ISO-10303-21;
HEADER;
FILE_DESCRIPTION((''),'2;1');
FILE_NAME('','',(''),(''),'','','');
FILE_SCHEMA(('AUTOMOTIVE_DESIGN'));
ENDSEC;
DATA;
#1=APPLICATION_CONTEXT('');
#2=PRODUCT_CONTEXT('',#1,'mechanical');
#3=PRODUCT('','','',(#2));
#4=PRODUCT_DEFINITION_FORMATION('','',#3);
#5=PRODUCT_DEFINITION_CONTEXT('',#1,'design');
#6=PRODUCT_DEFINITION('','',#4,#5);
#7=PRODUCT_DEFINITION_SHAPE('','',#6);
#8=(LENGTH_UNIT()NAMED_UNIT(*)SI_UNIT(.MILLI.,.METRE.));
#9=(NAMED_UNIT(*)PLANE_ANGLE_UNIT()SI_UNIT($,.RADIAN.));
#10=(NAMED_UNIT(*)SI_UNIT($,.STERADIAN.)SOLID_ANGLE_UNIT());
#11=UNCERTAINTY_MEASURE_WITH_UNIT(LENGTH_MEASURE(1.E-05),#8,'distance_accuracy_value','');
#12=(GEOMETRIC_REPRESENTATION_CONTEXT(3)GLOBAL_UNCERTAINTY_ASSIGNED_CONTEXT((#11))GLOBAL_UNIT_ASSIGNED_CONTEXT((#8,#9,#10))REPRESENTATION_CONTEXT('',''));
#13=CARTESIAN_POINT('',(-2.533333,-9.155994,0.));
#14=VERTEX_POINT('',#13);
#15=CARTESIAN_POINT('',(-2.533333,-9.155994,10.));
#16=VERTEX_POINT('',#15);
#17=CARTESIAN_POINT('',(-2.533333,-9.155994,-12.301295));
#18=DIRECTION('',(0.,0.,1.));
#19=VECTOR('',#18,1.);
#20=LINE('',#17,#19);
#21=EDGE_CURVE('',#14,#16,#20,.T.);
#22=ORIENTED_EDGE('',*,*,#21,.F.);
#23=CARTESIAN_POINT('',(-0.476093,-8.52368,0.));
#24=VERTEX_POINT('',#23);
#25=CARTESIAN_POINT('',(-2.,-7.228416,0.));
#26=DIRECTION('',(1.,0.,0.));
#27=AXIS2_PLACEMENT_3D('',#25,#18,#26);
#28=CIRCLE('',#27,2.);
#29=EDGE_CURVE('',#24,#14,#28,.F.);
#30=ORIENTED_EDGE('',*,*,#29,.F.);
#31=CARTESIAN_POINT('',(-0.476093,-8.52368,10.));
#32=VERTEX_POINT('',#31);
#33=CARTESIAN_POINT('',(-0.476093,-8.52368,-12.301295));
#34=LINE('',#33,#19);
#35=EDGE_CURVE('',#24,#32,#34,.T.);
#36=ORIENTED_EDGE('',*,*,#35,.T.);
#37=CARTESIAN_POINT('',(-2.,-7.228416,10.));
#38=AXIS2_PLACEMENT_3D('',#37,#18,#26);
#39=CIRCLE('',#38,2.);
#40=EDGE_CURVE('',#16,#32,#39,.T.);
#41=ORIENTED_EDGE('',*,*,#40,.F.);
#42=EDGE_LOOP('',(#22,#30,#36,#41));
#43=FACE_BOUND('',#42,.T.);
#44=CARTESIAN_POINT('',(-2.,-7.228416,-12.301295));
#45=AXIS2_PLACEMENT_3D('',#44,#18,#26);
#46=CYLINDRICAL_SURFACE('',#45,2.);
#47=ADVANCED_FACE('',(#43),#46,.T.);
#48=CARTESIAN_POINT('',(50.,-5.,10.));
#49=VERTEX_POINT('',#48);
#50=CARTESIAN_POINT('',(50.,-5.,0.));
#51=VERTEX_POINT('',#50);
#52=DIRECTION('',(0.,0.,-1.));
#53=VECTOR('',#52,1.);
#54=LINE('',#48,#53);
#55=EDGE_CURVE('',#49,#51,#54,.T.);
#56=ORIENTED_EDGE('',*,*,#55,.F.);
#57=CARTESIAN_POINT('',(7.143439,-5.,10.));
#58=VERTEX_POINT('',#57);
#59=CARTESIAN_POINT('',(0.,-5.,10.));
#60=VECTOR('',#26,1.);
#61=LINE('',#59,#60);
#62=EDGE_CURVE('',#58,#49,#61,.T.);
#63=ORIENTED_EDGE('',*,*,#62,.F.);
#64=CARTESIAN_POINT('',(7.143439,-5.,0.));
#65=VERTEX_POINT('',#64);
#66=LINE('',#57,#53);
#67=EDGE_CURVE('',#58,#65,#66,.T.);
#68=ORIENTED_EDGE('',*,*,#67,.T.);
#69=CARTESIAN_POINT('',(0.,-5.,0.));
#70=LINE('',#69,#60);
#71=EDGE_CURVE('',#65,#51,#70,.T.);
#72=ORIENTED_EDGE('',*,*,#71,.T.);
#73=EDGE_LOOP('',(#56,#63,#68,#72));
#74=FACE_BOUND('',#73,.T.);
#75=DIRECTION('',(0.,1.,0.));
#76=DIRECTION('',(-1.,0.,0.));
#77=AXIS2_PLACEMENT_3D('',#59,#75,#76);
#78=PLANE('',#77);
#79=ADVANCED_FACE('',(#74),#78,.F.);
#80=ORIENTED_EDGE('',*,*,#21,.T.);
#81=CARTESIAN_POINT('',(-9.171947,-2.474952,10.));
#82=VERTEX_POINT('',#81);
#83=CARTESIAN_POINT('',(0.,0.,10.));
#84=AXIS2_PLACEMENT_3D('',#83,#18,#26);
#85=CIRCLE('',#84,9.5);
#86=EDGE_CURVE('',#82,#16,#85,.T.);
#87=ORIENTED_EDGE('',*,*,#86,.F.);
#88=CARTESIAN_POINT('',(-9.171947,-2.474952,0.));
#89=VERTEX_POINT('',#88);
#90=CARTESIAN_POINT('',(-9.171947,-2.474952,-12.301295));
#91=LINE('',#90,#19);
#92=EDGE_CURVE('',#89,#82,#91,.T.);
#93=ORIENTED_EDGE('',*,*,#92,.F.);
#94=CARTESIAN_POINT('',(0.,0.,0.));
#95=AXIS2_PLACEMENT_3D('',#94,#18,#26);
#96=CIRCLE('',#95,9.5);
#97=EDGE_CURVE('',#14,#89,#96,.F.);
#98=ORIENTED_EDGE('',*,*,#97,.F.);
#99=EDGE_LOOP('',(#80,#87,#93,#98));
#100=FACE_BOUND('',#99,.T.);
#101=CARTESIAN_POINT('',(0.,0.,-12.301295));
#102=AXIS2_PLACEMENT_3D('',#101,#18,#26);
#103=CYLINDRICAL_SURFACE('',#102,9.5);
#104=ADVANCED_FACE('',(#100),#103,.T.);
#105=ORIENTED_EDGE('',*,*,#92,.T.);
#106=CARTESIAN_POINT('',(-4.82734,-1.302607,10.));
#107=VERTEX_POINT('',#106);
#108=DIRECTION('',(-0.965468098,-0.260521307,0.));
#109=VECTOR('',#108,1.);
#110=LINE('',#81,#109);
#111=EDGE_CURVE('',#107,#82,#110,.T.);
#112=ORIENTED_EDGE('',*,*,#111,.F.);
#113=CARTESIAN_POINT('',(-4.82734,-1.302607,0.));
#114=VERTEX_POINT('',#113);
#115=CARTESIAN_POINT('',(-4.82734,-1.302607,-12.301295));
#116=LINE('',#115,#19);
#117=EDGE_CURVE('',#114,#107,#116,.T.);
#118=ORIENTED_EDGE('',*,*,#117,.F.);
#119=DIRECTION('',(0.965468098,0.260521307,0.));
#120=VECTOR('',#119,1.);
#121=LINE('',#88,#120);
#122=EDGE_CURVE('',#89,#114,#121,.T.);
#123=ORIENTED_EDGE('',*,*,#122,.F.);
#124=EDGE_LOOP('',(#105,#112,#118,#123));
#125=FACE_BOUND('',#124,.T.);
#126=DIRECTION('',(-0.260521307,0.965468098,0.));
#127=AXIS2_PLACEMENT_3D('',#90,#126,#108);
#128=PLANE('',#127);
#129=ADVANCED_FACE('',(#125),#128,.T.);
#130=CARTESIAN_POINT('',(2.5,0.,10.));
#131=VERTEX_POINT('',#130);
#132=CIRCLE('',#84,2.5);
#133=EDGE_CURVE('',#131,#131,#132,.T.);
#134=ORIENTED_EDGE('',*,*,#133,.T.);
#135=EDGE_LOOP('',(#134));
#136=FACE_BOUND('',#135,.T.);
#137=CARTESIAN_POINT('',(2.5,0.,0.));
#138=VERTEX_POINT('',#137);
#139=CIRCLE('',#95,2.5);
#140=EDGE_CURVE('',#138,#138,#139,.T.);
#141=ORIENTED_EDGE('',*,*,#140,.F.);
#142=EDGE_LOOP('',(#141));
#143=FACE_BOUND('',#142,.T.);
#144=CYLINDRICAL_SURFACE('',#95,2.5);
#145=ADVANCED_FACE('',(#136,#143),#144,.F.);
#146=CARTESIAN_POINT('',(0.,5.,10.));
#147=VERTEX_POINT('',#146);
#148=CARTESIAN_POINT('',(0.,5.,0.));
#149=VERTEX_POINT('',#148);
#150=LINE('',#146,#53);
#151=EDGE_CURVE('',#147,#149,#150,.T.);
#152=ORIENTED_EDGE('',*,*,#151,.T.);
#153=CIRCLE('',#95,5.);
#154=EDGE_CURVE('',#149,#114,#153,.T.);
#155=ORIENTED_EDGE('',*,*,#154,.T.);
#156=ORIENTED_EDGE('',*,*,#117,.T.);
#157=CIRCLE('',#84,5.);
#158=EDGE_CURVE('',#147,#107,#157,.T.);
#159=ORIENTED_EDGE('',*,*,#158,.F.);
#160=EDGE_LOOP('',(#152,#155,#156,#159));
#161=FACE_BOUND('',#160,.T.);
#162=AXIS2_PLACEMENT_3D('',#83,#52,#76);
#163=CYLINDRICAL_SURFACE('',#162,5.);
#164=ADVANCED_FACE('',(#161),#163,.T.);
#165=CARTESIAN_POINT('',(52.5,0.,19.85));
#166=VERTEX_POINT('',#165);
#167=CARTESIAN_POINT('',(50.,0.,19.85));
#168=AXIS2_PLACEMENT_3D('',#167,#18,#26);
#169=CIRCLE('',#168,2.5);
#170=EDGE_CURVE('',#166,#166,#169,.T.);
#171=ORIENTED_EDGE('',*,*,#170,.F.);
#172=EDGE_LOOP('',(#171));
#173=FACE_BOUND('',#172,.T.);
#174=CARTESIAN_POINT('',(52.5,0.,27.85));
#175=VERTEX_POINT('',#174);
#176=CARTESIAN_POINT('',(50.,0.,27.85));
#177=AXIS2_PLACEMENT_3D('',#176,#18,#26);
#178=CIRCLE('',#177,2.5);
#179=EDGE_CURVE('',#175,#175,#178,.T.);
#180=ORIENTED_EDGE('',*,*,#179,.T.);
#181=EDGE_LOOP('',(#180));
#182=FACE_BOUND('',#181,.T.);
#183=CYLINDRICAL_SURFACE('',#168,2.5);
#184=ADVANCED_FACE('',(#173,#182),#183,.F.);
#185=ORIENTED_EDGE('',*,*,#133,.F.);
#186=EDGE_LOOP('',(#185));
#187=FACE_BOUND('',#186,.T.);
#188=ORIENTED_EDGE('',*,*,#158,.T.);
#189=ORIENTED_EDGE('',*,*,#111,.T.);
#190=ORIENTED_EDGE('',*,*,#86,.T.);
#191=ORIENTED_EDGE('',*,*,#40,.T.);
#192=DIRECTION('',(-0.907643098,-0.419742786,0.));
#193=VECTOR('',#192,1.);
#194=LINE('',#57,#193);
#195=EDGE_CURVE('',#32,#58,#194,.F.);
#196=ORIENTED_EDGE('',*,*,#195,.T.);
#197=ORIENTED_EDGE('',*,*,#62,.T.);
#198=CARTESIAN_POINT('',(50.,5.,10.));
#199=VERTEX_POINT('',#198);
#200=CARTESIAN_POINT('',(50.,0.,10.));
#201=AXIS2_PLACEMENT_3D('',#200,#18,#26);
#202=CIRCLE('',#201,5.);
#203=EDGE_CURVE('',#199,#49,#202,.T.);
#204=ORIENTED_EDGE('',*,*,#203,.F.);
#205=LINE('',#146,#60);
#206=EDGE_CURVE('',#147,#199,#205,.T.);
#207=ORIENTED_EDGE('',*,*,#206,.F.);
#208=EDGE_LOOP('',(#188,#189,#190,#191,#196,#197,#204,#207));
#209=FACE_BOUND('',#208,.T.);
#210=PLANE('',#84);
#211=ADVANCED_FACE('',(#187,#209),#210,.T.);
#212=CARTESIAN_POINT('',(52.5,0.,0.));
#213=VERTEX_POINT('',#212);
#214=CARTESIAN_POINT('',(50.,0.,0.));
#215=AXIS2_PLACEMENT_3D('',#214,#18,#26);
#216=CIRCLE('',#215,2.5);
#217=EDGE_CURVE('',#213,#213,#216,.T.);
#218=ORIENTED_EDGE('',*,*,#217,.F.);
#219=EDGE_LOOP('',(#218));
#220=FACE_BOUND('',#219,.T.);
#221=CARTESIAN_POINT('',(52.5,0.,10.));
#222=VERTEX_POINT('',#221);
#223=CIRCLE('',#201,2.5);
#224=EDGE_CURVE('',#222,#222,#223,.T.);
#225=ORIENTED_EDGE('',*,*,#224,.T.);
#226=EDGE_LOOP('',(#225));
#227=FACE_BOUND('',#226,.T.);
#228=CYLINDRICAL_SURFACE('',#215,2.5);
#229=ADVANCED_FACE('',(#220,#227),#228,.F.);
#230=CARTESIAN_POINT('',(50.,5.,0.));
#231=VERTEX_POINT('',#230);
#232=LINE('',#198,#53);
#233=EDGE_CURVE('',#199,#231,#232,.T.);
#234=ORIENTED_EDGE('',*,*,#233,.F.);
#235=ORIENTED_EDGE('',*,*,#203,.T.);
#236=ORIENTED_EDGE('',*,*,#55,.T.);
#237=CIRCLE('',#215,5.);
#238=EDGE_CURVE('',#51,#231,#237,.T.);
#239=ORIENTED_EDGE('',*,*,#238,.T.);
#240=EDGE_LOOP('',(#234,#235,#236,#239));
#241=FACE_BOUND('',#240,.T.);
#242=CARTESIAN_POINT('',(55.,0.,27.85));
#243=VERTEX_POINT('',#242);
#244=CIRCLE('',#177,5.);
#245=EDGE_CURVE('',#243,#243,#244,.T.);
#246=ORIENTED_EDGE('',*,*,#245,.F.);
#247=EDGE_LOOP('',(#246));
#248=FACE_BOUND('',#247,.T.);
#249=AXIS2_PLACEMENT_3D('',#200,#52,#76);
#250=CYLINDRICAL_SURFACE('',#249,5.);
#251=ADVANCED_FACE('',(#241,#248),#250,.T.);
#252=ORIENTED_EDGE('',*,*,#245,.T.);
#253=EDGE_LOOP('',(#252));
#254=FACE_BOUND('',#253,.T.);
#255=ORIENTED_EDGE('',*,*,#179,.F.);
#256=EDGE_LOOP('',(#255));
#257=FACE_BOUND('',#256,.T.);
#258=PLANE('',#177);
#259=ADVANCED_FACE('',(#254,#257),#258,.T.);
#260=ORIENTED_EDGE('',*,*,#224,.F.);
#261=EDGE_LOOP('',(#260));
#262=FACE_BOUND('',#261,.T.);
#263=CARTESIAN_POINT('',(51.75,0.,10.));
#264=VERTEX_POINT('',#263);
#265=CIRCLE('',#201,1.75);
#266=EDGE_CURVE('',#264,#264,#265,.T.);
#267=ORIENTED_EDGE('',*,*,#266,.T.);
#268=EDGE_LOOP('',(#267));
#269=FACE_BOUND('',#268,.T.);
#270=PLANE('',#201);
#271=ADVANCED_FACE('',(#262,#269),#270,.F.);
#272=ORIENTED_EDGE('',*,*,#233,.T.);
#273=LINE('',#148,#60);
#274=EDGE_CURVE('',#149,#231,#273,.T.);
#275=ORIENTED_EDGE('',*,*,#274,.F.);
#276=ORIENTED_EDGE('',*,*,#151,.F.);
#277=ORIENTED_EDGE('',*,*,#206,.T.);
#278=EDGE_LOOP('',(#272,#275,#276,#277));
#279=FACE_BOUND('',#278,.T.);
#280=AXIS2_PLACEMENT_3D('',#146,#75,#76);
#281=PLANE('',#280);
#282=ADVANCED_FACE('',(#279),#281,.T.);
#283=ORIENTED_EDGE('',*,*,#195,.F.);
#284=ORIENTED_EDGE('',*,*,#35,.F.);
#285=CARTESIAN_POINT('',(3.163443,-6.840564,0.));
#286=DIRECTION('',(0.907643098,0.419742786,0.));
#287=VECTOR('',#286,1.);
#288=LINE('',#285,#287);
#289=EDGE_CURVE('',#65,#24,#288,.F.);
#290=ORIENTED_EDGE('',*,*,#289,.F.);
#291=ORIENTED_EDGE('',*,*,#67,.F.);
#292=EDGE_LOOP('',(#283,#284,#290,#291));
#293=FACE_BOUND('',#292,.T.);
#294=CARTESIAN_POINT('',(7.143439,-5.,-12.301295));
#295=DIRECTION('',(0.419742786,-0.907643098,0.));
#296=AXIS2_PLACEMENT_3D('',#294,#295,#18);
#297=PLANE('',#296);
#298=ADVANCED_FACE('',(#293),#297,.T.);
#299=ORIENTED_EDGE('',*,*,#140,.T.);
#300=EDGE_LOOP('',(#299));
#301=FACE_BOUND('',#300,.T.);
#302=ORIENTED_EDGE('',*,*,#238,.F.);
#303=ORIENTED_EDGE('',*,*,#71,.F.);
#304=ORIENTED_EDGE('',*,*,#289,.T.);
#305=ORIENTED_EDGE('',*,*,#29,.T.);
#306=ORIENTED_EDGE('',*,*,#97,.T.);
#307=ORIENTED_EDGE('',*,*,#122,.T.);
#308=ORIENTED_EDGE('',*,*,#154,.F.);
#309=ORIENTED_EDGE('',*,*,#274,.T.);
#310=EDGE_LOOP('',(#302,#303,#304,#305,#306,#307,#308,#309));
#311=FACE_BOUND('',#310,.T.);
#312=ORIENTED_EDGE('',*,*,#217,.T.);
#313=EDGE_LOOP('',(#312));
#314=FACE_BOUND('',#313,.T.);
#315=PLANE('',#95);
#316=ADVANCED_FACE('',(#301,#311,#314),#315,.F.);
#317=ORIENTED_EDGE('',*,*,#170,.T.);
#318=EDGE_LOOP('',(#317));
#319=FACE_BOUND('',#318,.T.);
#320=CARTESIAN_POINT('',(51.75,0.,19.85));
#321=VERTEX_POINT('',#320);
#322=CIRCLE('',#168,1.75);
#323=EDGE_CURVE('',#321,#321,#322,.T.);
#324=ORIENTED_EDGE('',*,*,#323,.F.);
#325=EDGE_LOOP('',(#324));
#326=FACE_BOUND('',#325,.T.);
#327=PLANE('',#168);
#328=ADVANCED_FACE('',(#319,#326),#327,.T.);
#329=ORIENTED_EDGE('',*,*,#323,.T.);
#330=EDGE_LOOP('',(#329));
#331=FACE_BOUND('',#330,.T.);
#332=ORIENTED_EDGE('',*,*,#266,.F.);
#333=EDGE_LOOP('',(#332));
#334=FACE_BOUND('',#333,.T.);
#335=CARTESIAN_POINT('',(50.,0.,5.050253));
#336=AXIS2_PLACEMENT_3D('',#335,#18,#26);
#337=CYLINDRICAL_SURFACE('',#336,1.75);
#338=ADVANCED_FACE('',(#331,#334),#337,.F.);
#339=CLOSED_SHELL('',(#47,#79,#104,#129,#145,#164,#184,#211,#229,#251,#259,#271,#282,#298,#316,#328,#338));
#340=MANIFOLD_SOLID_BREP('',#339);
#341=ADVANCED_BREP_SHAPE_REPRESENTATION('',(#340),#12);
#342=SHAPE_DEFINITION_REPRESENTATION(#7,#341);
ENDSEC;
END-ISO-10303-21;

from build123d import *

# Parameters (mm, degrees)
EXTRUDE_1_DEPTH     = 10
SKETCH_2_R          = 2.500000000000002
SKETCH_2_R_2        = 2.5
CUT_EXTRUDE_1_DEPTH = 10
SKETCH_4_R          = 4.999999999999997
EXTRUDE_2_DEPTH     = 17.85
EXTRUDE_START       = -10
EXTRUDE_3_DEPTH     = 10
FILLET_1_R          = 2
CHAMFER_START       = 4
CHAMFER_1_OUTLINE_W = 8.394855713999998
CHAMFER_1_OUTLINE_H = 10
CHAMFER_1_DEPTH     = 3.536622653
SKETCH_6_R          = 2.500000000000002
CUT_EXTRUDE_2_DEPTH = 8
SKETCH_8_R          = 1.7500000000000036
CUT_EXTRUDE_4_DEPTH = 0.85
SKETCH_9_R          = 1.7499999999999967
CUT_EXTRUDE_5_DEPTH = 23.000000000000007
CUT_EXTRUDE_START   = -3
CUT_EXTRUDE_6_DEPTH = 4
FILLET_2_R          = 1
EXTRUDE_4_DEPTH     = 4
SKETCH_12_R         = 2.5
EXTRUDE_5_DEPTH     = 4


with BuildPart() as part:
    # 草图1 → 凸台-拉伸1 (new body)
    with BuildSketch(Plane.XY):
        with BuildLine():
            Line((0, 5), (50, 5.000000000000001))
            ThreePointArc((50, 5.000000000000001), (55, 0), (50, -4.999999999999997))
            Line((50, -4.999999999999997), (0, -5))
            ThreePointArc((0, -5), (-5, 6.1e-16), (0, 5))
        make_face()
    extrude(amount=EXTRUDE_1_DEPTH)

    # 草图2 → 切除-拉伸1 (cut)
    with BuildSketch(Plane.XY.offset(10)):
        with Locations((50, 0)):
            Circle(SKETCH_2_R)
        Circle(SKETCH_2_R_2)
    extrude(amount=-CUT_EXTRUDE_1_DEPTH, mode=Mode.SUBTRACT)

    # 草图4 → 凸台-拉伸2 (add)
    with BuildSketch(Plane.XY.offset(10)):
        with Locations(Location((50, 0, 0), (0, 0, 90))):
            Circle(SKETCH_4_R)
    extrude(amount=EXTRUDE_2_DEPTH)

    # 草图5 → 凸台-拉伸3 (add)
    with BuildSketch(Plane.XY.offset(10).offset(EXTRUDE_START)):
        with BuildLine():
            Line((-9.171946933133274, -2.4749524148530857), (-4.827340491122777, -1.3026065341332034))
            ThreePointArc((-4.827340491122777, -1.3026065341332034), (-3.0403097974823012, -3.9694478627805583), (5.411e-14, -5))
            Line((5.411e-14, -5), (1.028e-13, -9.5))
            ThreePointArc((1.028e-13, -9.5), (-5.7765886152163715, -7.541950939283059), (-9.171946933133274, -2.4749524148530857))
        make_face()
    extrude(amount=EXTRUDE_3_DEPTH)

    # 圆角1
    fillet_1_edges = [part.edges().sort_by_distance(p)[0] for p in [
        (1.028e-13, -9.5, 5),
    ]]
    fillet(fillet_1_edges, radius=FILLET_1_R)

    # 倒角1: read off the stored shape, not the designer's step
    # 倒角1 outline → 倒角1 (add)
    with BuildSketch(Plane(origin=(0, 0, 0), x_dir=(0.9076430982816491, 0.41974278569343915, 0), z_dir=(0.41974278569343915, -0.9076430982816494, 0)).offset(CHAMFER_START)):
        with Locations((0.18755170199999993, 5)):
            Rectangle(CHAMFER_1_OUTLINE_W, CHAMFER_1_OUTLINE_H)
    extrude(amount=CHAMFER_1_DEPTH)

    # 草图6 → 切除-拉伸2 (cut)
    with BuildSketch(Plane.XY.offset(27.85)):
        with Locations((50, 0)):
            Circle(SKETCH_6_R)
    extrude(amount=-CUT_EXTRUDE_2_DEPTH, mode=Mode.SUBTRACT)

    # 草图8 → 切除-拉伸4 (cut)
    with BuildSketch(Plane.XY.offset(19.849999999999998)):
        with Locations((50, 0)):
            Circle(SKETCH_8_R)
    extrude(amount=-CUT_EXTRUDE_4_DEPTH, mode=Mode.SUBTRACT)

    # 草图9 → 切除-拉伸5 (cut)
    with BuildSketch(Plane.XY.offset(19)):
        with Locations((50, 0)):
            Circle(SKETCH_9_R)
    extrude(amount=-CUT_EXTRUDE_5_DEPTH, mode=Mode.SUBTRACT)

    # 草图10 → 切除-拉伸6 (cut)
    with BuildSketch(Plane(origin=(0, 0, 0), x_dir=(-1, 0, 0), z_dir=(0, 0, -1)).offset(CUT_EXTRUDE_START)):
        with BuildLine():
            Line((9.171946933133274, -2.474952414853084), (4.827340491122777, -1.3026065341332034))
            ThreePointArc((4.827340491122777, -1.3026065341332034), (-4.327921927110574, 2.503815447039879), (3.535533905932719, -3.535533905932756))
            Line((3.535533905932719, -3.535533905932756), (6.717514421272165, -6.717514421272236))
            ThreePointArc((6.717514421272165, -6.717514421272236), (8.223051661510087, -4.757249349375768), (9.171946933133274, -2.474952414853084))
        make_face()
    extrude(amount=-CUT_EXTRUDE_6_DEPTH, mode=Mode.SUBTRACT)

    # 圆角2
    fillet_2_edges = [part.edges().sort_by_distance(p)[0] for p in [
        (-3.1e-16, 5, 5),
    ]]
    fillet(fillet_2_edges, radius=FILLET_2_R)

    # 草图11 → 凸台-拉伸4 (add)
    with BuildSketch(Plane.XY.offset(3)):
        with BuildLine():
            Line((-3.5355339059327213, -3.535533905932754), (-8.205808816608519, -4.78693029667969))
            ThreePointArc((-8.205808816608519, -4.78693029667969), (-7.523840965962772, -5.800156646065724), (-6.717514421272165, -6.717514421272236))
            Line((-6.717514421272165, -6.717514421272236), (-3.5355339059327213, -3.535533905932754))
        make_face()
    extrude(amount=EXTRUDE_4_DEPTH)

    # 草图12 → 凸台-拉伸5 (add)
    with BuildSketch(Plane.XY.offset(3)):
        with BuildLine():
            Line((-8.205808816608517, -4.786930296679689), (-3.5355339059327213, -3.535533905932754))
            ThreePointArc((-3.5355339059327213, -3.535533905932754), (3.435764551188546, -3.632564101126939), (3.726779962499649, 3.3333333333333344))
            ThreePointArc((3.726779962499649, 3.3333333333333344), (3.559265025824303, 4.408248290463864), (4.47213595499958, 5))
            Line((4.47213595499958, 5), (0, 5))
            ThreePointArc((0, 5), (-3.96944786278054, 3.0403097974823226), (-4.827340491122777, -1.3026065341332023))
            Line((-4.827340491122777, -1.3026065341332023), (-9.171946933133274, -2.474952414853084))
            ThreePointArc((-9.171946933133274, -2.474952414853084), (-8.765438332219034, -3.66293473106813), (-8.205808816608517, -4.786930296679689))
        make_face()
        Circle(SKETCH_12_R, mode=Mode.SUBTRACT)
    extrude(amount=EXTRUDE_5_DEPTH)


solid = part.part
